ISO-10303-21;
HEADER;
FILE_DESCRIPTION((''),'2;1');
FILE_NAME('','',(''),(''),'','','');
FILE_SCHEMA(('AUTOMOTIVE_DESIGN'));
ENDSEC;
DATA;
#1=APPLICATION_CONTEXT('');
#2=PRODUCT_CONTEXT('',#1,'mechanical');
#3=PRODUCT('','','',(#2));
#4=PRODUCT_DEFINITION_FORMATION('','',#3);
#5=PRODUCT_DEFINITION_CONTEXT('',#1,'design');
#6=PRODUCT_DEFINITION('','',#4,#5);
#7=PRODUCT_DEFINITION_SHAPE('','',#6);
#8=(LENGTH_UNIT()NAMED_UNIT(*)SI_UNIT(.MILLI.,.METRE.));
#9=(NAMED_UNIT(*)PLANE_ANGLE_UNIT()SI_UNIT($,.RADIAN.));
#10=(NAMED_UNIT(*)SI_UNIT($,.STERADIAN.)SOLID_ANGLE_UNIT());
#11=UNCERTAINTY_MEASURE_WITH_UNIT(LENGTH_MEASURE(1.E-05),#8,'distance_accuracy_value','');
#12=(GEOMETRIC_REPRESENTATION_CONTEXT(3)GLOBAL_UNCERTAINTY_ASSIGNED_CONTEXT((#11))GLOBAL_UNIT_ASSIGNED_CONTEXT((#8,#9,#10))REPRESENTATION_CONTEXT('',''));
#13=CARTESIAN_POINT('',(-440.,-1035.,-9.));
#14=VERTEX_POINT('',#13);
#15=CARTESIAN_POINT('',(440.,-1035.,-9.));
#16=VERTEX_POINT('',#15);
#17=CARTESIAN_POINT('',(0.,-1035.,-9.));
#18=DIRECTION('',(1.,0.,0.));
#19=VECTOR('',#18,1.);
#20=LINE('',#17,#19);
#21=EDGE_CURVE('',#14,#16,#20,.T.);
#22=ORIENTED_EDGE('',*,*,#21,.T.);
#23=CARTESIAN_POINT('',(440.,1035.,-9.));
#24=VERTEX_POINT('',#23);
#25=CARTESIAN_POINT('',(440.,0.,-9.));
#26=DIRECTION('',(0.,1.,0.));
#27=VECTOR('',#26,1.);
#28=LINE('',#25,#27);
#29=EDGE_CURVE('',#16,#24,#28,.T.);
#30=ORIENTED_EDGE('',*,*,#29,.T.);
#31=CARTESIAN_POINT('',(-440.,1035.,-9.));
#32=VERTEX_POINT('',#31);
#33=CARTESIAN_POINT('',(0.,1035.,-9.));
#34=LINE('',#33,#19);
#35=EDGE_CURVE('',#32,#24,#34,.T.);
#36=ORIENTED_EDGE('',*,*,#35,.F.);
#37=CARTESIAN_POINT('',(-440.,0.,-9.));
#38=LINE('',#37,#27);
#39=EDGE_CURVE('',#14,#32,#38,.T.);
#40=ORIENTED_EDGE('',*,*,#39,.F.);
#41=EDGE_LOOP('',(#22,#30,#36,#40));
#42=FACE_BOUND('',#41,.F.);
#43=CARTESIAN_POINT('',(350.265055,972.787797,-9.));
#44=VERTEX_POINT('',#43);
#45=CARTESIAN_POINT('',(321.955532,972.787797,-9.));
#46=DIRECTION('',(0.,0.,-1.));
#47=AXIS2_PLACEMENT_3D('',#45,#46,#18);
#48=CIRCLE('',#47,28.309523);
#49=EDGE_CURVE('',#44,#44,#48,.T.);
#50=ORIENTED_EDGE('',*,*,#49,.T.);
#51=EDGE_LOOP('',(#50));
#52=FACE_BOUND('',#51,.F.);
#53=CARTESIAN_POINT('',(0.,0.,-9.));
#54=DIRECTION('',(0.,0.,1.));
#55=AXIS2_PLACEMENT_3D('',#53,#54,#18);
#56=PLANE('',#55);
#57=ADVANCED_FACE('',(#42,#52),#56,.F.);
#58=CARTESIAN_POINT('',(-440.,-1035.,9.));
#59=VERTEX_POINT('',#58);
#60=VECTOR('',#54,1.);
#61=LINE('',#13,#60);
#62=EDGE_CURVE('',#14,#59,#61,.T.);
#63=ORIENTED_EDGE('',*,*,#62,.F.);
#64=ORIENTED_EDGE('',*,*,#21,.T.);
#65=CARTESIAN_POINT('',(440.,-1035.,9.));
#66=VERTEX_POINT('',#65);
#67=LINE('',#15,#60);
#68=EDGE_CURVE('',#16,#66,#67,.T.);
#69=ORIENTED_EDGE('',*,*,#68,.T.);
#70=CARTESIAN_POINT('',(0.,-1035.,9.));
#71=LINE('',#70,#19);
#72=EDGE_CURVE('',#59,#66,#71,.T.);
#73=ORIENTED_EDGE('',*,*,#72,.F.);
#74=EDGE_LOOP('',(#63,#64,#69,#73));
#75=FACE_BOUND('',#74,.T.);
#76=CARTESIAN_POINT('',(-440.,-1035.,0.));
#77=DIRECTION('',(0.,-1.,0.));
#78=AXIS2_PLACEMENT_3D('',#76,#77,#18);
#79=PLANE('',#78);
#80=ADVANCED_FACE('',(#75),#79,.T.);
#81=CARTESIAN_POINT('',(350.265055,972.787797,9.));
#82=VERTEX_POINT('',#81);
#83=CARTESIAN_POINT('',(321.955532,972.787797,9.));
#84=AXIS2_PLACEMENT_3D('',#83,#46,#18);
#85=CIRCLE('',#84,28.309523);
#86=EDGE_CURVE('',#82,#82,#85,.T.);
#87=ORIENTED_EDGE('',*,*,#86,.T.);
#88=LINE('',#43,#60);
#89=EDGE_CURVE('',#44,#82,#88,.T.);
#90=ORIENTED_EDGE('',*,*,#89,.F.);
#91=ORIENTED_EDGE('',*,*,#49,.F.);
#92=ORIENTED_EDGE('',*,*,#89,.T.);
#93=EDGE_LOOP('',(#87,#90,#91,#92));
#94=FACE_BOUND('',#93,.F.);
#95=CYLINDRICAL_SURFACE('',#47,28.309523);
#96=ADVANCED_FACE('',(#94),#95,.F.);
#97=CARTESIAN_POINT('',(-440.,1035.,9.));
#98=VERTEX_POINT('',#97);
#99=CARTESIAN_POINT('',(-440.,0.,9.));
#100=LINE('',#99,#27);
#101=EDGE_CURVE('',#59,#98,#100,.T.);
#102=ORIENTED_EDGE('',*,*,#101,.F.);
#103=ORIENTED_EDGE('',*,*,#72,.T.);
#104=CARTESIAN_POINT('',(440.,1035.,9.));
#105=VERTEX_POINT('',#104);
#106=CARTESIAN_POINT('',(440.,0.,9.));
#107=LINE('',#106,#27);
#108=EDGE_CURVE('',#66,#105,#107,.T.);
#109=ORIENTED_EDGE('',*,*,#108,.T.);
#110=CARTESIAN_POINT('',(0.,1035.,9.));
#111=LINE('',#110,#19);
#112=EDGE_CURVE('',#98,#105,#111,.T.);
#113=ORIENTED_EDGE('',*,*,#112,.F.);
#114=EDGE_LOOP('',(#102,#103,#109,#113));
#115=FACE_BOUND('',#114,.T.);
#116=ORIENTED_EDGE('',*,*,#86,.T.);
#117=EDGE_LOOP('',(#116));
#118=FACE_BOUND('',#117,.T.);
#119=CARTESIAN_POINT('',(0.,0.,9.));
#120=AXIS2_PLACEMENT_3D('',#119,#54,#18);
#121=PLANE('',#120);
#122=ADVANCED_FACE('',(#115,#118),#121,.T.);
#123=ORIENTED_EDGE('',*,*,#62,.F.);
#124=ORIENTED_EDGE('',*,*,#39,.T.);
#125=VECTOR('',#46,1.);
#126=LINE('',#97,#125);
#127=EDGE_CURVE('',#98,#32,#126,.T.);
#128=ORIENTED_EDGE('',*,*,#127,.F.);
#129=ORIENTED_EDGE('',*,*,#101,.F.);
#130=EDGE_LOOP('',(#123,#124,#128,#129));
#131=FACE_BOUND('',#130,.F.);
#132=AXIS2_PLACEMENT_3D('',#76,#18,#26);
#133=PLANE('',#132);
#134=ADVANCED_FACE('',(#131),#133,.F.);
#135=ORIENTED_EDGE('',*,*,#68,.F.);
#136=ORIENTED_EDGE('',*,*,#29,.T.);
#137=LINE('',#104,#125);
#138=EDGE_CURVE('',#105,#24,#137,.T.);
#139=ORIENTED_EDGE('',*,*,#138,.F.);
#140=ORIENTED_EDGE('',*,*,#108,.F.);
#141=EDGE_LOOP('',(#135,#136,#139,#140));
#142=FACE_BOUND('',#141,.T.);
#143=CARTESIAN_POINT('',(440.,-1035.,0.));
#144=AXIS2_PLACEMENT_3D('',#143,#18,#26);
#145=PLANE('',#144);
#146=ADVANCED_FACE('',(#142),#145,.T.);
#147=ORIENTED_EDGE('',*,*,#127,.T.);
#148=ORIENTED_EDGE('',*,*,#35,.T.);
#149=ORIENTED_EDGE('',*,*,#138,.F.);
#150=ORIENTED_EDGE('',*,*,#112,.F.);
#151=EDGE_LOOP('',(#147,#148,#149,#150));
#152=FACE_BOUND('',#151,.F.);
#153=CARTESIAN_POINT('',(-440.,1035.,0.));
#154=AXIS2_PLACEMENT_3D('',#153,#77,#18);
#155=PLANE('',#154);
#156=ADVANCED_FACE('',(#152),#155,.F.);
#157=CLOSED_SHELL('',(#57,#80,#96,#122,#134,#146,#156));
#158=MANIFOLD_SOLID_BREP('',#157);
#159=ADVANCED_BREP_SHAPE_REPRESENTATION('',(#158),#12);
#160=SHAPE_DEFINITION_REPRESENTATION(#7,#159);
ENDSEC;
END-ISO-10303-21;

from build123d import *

# Parameters (mm, degrees)
F0_W     = 880
F0_H     = 2070
F1_DEPTH = 9
F2_R     = 28.3095234394
F3_DEPTH = 18


with BuildPart() as f1:
    # F0 (on Top) → F1 (new body, symmetric)
    with BuildSketch(Plane.XY):
        Rectangle(F0_W, F0_H)
    extrude(amount=F1_DEPTH, both=True)

    # F2 (on face) → F3 (cut)
    with BuildSketch(Plane(origin=(0, 0, -9), x_dir=(1, 0, 0), z_dir=(0, 0, -1))):
        with Locations((321.9555318356, -972.787797451)):
            Circle(F2_R)
    extrude(amount=-F3_DEPTH, mode=Mode.SUBTRACT)


solid = f1.part
